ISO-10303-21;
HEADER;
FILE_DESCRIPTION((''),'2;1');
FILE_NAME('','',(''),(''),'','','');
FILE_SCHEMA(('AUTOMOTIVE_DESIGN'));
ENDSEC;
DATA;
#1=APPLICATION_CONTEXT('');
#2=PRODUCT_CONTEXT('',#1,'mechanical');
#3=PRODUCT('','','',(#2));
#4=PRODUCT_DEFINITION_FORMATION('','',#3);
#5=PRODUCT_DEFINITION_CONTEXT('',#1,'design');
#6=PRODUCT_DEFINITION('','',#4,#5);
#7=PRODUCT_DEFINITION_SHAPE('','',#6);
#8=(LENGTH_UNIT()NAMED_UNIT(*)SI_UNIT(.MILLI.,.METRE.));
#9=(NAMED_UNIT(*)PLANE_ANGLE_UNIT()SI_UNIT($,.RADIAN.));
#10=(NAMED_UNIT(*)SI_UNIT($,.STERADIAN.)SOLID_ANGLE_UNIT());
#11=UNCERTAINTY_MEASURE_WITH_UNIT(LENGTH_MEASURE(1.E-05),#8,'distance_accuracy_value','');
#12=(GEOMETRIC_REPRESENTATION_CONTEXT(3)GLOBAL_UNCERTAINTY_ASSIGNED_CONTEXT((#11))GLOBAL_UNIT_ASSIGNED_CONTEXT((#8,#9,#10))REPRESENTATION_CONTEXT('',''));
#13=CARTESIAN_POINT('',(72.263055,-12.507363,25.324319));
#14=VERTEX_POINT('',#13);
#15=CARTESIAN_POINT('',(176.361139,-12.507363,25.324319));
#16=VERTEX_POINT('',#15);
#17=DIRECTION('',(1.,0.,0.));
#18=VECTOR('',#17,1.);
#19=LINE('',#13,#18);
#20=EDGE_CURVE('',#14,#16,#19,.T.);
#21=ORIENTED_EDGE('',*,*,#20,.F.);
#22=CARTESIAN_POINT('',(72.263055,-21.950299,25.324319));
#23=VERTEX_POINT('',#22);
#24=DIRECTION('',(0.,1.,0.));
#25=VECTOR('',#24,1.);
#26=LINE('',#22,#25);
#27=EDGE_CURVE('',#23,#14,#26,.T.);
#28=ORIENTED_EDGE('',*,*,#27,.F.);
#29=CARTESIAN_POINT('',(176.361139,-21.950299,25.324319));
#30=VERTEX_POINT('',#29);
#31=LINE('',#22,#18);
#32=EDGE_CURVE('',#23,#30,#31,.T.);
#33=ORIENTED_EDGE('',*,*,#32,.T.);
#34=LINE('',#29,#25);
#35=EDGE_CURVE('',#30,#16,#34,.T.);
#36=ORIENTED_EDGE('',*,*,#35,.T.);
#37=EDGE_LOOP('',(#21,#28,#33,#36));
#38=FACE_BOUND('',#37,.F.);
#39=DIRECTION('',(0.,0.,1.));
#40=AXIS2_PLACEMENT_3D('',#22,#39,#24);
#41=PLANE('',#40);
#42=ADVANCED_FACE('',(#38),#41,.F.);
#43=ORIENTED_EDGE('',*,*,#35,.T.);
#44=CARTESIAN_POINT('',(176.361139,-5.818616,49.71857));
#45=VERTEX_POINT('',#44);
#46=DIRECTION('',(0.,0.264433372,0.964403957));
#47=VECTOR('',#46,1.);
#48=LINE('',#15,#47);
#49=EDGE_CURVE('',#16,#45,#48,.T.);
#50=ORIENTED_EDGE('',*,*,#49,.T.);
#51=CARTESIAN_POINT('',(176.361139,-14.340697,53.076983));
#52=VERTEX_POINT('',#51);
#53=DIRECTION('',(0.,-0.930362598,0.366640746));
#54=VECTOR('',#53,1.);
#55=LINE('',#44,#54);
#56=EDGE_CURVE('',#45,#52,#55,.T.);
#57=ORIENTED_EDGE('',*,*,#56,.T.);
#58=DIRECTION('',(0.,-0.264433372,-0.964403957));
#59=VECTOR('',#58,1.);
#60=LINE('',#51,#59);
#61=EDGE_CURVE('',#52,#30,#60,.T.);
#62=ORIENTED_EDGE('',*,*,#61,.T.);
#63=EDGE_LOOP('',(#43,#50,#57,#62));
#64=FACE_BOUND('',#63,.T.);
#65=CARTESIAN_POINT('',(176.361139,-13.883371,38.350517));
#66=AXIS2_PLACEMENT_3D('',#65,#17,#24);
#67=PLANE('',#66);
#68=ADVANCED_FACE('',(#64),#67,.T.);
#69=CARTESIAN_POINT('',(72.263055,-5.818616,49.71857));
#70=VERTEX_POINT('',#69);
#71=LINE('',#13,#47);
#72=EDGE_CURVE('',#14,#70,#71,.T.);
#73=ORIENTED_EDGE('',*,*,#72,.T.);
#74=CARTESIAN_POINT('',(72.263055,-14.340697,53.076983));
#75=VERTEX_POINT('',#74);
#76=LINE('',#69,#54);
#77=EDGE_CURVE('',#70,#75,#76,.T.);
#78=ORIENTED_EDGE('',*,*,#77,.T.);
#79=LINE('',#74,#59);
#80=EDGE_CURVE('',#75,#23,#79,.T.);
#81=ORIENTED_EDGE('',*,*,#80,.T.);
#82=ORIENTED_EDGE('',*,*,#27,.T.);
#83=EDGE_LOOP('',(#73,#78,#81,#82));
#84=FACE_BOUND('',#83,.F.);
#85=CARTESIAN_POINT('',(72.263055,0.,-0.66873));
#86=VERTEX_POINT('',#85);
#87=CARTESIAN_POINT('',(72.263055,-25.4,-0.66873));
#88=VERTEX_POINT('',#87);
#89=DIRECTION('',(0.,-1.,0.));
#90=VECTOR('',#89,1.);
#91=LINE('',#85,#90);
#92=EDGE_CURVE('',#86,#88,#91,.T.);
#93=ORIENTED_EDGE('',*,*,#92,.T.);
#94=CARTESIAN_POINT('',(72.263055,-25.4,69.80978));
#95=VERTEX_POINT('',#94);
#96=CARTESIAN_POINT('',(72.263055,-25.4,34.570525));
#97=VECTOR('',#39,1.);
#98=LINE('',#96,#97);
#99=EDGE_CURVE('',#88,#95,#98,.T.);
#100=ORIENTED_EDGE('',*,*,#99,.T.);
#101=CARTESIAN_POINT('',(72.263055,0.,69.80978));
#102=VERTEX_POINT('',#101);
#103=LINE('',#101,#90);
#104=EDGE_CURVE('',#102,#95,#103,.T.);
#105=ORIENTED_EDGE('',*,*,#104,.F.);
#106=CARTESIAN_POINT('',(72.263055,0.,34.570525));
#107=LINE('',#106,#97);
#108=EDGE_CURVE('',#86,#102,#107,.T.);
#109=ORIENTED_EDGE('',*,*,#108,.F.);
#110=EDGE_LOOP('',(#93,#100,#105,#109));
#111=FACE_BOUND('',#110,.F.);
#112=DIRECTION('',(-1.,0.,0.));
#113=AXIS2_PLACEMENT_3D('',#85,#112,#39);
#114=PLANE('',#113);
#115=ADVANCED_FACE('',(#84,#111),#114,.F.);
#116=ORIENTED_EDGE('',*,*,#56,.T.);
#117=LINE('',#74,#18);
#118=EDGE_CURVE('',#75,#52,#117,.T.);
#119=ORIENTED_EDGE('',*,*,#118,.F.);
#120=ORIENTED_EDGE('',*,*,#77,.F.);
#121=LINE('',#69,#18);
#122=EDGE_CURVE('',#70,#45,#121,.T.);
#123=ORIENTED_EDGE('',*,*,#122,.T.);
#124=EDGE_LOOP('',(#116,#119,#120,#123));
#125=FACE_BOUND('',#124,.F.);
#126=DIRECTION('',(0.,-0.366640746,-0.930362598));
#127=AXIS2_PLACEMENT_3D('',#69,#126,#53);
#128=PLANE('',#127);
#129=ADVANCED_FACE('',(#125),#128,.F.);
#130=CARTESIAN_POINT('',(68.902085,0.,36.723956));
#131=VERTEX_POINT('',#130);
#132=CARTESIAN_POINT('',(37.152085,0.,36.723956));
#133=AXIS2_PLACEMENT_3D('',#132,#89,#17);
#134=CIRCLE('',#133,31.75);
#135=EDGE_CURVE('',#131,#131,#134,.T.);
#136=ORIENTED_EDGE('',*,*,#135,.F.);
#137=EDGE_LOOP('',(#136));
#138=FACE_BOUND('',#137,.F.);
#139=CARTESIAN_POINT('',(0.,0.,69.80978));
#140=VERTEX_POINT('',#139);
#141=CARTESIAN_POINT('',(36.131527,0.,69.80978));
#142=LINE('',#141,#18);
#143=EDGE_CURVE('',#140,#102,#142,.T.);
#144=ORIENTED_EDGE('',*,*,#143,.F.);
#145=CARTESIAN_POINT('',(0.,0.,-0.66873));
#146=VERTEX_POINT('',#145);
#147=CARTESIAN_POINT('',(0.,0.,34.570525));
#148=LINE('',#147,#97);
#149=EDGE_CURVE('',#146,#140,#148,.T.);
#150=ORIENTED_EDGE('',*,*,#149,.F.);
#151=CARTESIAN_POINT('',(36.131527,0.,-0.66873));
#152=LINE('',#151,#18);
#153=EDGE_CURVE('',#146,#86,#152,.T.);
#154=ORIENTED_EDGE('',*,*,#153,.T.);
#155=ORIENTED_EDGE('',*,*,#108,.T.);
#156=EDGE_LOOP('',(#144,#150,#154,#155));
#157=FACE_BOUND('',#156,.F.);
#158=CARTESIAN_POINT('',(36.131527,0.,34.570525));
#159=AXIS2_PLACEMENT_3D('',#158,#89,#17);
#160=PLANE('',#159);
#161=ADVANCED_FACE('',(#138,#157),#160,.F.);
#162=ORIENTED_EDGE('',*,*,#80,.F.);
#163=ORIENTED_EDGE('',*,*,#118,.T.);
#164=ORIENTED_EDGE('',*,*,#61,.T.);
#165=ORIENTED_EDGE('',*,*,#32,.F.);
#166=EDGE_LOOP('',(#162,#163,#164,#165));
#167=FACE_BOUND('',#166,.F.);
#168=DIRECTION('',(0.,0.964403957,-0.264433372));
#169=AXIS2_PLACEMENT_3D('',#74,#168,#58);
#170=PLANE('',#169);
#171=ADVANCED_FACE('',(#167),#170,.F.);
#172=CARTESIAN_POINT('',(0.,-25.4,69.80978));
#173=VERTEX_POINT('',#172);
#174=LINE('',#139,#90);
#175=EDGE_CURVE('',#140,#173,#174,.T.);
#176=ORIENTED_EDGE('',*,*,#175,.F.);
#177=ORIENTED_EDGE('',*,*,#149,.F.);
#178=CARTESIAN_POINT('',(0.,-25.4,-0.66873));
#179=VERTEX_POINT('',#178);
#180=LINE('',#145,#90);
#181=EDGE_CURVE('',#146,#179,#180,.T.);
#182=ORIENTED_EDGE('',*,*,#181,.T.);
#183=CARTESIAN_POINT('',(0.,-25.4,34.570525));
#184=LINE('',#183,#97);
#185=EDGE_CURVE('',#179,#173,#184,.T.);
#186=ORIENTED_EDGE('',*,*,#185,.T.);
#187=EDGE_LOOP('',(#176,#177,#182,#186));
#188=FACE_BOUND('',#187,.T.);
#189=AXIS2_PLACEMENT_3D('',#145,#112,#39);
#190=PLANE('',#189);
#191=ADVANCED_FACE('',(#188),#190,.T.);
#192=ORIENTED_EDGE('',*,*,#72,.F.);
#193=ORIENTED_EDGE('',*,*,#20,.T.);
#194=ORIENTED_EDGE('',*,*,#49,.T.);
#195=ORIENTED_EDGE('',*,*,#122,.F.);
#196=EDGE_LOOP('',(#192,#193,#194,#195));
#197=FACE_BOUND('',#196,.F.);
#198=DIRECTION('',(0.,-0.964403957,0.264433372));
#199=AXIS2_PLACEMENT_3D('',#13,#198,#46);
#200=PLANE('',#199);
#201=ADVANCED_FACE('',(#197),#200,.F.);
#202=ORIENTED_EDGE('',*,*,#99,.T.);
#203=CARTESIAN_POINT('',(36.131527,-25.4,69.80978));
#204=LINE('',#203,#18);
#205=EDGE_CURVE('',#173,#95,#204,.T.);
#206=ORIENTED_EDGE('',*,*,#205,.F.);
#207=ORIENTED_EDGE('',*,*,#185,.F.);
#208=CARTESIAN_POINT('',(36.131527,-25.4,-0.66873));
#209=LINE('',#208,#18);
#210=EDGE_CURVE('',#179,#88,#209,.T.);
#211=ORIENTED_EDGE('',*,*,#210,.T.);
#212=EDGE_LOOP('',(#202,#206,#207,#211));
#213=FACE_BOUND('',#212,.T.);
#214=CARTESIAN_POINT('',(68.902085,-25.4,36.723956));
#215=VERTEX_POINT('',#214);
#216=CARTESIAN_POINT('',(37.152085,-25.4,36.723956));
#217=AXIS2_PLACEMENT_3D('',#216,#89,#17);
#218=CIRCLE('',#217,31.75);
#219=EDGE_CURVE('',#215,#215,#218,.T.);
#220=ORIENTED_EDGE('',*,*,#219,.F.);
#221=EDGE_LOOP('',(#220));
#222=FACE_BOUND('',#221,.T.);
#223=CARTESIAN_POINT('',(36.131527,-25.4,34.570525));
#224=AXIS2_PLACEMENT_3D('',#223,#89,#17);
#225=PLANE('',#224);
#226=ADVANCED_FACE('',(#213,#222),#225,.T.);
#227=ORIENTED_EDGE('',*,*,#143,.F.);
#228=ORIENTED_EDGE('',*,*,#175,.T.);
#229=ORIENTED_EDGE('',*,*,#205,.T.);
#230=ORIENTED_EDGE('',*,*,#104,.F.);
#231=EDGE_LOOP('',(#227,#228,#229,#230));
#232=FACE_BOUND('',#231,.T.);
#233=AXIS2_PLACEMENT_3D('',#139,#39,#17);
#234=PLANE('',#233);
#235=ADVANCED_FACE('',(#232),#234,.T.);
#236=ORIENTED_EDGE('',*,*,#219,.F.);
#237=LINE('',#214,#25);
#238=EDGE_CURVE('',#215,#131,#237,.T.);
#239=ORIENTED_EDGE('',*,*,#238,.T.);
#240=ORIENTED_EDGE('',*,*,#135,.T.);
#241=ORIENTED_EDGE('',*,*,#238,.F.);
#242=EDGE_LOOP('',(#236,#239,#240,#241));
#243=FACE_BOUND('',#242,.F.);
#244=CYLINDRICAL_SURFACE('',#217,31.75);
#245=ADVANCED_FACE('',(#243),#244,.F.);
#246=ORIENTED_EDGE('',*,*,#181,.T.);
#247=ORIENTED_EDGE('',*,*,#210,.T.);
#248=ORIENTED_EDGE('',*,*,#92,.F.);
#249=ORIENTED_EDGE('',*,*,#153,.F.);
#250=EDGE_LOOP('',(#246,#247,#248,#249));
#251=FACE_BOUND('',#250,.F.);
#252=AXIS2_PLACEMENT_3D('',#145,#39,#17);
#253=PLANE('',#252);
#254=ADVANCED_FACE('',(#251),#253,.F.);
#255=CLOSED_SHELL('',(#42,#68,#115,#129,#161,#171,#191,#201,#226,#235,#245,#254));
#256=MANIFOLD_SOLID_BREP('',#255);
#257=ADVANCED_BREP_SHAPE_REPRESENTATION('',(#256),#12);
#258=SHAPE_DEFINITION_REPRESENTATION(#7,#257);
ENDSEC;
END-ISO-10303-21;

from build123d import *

# Parameters (mm, degrees)
F0_W     = 72.2630545497
F0_H     = 70.4785098787
F1_DEPTH = 25.4
F2_R     = 31.75
F3_DEPTH = 25.401
F5_DEPTH = 104.0980848


# Not quite as in the source:
# - an extrude ends at something that could not be found from the text; its depth is read off the source's solid


with BuildPart() as f1:
    # F0 (on Front) → F1 (new body)
    with BuildSketch(Plane.XZ):
        with Locations((36.1315272748, 34.5705245854)):
            Rectangle(F0_W, F0_H)
    extrude(amount=F1_DEPTH)

    # F2 (on face) → F3 (cut, through all)
    with BuildSketch(Plane.XZ.offset(25.4)):
        with Locations((37.1520854533, 36.7239564657)):
            Circle(F2_R)
    extrude(amount=-F3_DEPTH, mode=Mode.SUBTRACT)

    # F4 (on face) → F5 (join, through all)
    with BuildSketch(Plane.YZ.offset(72.2630545497)):
        Polygon((-12.5073632225, 25.324318558), (-5.8186161332, 49.7185699642), (-14.3406965322, 53.0769830369), (-21.9502989203, 25.324318558), align=None)
    extrude(amount=F5_DEPTH)


solid = f1.part
